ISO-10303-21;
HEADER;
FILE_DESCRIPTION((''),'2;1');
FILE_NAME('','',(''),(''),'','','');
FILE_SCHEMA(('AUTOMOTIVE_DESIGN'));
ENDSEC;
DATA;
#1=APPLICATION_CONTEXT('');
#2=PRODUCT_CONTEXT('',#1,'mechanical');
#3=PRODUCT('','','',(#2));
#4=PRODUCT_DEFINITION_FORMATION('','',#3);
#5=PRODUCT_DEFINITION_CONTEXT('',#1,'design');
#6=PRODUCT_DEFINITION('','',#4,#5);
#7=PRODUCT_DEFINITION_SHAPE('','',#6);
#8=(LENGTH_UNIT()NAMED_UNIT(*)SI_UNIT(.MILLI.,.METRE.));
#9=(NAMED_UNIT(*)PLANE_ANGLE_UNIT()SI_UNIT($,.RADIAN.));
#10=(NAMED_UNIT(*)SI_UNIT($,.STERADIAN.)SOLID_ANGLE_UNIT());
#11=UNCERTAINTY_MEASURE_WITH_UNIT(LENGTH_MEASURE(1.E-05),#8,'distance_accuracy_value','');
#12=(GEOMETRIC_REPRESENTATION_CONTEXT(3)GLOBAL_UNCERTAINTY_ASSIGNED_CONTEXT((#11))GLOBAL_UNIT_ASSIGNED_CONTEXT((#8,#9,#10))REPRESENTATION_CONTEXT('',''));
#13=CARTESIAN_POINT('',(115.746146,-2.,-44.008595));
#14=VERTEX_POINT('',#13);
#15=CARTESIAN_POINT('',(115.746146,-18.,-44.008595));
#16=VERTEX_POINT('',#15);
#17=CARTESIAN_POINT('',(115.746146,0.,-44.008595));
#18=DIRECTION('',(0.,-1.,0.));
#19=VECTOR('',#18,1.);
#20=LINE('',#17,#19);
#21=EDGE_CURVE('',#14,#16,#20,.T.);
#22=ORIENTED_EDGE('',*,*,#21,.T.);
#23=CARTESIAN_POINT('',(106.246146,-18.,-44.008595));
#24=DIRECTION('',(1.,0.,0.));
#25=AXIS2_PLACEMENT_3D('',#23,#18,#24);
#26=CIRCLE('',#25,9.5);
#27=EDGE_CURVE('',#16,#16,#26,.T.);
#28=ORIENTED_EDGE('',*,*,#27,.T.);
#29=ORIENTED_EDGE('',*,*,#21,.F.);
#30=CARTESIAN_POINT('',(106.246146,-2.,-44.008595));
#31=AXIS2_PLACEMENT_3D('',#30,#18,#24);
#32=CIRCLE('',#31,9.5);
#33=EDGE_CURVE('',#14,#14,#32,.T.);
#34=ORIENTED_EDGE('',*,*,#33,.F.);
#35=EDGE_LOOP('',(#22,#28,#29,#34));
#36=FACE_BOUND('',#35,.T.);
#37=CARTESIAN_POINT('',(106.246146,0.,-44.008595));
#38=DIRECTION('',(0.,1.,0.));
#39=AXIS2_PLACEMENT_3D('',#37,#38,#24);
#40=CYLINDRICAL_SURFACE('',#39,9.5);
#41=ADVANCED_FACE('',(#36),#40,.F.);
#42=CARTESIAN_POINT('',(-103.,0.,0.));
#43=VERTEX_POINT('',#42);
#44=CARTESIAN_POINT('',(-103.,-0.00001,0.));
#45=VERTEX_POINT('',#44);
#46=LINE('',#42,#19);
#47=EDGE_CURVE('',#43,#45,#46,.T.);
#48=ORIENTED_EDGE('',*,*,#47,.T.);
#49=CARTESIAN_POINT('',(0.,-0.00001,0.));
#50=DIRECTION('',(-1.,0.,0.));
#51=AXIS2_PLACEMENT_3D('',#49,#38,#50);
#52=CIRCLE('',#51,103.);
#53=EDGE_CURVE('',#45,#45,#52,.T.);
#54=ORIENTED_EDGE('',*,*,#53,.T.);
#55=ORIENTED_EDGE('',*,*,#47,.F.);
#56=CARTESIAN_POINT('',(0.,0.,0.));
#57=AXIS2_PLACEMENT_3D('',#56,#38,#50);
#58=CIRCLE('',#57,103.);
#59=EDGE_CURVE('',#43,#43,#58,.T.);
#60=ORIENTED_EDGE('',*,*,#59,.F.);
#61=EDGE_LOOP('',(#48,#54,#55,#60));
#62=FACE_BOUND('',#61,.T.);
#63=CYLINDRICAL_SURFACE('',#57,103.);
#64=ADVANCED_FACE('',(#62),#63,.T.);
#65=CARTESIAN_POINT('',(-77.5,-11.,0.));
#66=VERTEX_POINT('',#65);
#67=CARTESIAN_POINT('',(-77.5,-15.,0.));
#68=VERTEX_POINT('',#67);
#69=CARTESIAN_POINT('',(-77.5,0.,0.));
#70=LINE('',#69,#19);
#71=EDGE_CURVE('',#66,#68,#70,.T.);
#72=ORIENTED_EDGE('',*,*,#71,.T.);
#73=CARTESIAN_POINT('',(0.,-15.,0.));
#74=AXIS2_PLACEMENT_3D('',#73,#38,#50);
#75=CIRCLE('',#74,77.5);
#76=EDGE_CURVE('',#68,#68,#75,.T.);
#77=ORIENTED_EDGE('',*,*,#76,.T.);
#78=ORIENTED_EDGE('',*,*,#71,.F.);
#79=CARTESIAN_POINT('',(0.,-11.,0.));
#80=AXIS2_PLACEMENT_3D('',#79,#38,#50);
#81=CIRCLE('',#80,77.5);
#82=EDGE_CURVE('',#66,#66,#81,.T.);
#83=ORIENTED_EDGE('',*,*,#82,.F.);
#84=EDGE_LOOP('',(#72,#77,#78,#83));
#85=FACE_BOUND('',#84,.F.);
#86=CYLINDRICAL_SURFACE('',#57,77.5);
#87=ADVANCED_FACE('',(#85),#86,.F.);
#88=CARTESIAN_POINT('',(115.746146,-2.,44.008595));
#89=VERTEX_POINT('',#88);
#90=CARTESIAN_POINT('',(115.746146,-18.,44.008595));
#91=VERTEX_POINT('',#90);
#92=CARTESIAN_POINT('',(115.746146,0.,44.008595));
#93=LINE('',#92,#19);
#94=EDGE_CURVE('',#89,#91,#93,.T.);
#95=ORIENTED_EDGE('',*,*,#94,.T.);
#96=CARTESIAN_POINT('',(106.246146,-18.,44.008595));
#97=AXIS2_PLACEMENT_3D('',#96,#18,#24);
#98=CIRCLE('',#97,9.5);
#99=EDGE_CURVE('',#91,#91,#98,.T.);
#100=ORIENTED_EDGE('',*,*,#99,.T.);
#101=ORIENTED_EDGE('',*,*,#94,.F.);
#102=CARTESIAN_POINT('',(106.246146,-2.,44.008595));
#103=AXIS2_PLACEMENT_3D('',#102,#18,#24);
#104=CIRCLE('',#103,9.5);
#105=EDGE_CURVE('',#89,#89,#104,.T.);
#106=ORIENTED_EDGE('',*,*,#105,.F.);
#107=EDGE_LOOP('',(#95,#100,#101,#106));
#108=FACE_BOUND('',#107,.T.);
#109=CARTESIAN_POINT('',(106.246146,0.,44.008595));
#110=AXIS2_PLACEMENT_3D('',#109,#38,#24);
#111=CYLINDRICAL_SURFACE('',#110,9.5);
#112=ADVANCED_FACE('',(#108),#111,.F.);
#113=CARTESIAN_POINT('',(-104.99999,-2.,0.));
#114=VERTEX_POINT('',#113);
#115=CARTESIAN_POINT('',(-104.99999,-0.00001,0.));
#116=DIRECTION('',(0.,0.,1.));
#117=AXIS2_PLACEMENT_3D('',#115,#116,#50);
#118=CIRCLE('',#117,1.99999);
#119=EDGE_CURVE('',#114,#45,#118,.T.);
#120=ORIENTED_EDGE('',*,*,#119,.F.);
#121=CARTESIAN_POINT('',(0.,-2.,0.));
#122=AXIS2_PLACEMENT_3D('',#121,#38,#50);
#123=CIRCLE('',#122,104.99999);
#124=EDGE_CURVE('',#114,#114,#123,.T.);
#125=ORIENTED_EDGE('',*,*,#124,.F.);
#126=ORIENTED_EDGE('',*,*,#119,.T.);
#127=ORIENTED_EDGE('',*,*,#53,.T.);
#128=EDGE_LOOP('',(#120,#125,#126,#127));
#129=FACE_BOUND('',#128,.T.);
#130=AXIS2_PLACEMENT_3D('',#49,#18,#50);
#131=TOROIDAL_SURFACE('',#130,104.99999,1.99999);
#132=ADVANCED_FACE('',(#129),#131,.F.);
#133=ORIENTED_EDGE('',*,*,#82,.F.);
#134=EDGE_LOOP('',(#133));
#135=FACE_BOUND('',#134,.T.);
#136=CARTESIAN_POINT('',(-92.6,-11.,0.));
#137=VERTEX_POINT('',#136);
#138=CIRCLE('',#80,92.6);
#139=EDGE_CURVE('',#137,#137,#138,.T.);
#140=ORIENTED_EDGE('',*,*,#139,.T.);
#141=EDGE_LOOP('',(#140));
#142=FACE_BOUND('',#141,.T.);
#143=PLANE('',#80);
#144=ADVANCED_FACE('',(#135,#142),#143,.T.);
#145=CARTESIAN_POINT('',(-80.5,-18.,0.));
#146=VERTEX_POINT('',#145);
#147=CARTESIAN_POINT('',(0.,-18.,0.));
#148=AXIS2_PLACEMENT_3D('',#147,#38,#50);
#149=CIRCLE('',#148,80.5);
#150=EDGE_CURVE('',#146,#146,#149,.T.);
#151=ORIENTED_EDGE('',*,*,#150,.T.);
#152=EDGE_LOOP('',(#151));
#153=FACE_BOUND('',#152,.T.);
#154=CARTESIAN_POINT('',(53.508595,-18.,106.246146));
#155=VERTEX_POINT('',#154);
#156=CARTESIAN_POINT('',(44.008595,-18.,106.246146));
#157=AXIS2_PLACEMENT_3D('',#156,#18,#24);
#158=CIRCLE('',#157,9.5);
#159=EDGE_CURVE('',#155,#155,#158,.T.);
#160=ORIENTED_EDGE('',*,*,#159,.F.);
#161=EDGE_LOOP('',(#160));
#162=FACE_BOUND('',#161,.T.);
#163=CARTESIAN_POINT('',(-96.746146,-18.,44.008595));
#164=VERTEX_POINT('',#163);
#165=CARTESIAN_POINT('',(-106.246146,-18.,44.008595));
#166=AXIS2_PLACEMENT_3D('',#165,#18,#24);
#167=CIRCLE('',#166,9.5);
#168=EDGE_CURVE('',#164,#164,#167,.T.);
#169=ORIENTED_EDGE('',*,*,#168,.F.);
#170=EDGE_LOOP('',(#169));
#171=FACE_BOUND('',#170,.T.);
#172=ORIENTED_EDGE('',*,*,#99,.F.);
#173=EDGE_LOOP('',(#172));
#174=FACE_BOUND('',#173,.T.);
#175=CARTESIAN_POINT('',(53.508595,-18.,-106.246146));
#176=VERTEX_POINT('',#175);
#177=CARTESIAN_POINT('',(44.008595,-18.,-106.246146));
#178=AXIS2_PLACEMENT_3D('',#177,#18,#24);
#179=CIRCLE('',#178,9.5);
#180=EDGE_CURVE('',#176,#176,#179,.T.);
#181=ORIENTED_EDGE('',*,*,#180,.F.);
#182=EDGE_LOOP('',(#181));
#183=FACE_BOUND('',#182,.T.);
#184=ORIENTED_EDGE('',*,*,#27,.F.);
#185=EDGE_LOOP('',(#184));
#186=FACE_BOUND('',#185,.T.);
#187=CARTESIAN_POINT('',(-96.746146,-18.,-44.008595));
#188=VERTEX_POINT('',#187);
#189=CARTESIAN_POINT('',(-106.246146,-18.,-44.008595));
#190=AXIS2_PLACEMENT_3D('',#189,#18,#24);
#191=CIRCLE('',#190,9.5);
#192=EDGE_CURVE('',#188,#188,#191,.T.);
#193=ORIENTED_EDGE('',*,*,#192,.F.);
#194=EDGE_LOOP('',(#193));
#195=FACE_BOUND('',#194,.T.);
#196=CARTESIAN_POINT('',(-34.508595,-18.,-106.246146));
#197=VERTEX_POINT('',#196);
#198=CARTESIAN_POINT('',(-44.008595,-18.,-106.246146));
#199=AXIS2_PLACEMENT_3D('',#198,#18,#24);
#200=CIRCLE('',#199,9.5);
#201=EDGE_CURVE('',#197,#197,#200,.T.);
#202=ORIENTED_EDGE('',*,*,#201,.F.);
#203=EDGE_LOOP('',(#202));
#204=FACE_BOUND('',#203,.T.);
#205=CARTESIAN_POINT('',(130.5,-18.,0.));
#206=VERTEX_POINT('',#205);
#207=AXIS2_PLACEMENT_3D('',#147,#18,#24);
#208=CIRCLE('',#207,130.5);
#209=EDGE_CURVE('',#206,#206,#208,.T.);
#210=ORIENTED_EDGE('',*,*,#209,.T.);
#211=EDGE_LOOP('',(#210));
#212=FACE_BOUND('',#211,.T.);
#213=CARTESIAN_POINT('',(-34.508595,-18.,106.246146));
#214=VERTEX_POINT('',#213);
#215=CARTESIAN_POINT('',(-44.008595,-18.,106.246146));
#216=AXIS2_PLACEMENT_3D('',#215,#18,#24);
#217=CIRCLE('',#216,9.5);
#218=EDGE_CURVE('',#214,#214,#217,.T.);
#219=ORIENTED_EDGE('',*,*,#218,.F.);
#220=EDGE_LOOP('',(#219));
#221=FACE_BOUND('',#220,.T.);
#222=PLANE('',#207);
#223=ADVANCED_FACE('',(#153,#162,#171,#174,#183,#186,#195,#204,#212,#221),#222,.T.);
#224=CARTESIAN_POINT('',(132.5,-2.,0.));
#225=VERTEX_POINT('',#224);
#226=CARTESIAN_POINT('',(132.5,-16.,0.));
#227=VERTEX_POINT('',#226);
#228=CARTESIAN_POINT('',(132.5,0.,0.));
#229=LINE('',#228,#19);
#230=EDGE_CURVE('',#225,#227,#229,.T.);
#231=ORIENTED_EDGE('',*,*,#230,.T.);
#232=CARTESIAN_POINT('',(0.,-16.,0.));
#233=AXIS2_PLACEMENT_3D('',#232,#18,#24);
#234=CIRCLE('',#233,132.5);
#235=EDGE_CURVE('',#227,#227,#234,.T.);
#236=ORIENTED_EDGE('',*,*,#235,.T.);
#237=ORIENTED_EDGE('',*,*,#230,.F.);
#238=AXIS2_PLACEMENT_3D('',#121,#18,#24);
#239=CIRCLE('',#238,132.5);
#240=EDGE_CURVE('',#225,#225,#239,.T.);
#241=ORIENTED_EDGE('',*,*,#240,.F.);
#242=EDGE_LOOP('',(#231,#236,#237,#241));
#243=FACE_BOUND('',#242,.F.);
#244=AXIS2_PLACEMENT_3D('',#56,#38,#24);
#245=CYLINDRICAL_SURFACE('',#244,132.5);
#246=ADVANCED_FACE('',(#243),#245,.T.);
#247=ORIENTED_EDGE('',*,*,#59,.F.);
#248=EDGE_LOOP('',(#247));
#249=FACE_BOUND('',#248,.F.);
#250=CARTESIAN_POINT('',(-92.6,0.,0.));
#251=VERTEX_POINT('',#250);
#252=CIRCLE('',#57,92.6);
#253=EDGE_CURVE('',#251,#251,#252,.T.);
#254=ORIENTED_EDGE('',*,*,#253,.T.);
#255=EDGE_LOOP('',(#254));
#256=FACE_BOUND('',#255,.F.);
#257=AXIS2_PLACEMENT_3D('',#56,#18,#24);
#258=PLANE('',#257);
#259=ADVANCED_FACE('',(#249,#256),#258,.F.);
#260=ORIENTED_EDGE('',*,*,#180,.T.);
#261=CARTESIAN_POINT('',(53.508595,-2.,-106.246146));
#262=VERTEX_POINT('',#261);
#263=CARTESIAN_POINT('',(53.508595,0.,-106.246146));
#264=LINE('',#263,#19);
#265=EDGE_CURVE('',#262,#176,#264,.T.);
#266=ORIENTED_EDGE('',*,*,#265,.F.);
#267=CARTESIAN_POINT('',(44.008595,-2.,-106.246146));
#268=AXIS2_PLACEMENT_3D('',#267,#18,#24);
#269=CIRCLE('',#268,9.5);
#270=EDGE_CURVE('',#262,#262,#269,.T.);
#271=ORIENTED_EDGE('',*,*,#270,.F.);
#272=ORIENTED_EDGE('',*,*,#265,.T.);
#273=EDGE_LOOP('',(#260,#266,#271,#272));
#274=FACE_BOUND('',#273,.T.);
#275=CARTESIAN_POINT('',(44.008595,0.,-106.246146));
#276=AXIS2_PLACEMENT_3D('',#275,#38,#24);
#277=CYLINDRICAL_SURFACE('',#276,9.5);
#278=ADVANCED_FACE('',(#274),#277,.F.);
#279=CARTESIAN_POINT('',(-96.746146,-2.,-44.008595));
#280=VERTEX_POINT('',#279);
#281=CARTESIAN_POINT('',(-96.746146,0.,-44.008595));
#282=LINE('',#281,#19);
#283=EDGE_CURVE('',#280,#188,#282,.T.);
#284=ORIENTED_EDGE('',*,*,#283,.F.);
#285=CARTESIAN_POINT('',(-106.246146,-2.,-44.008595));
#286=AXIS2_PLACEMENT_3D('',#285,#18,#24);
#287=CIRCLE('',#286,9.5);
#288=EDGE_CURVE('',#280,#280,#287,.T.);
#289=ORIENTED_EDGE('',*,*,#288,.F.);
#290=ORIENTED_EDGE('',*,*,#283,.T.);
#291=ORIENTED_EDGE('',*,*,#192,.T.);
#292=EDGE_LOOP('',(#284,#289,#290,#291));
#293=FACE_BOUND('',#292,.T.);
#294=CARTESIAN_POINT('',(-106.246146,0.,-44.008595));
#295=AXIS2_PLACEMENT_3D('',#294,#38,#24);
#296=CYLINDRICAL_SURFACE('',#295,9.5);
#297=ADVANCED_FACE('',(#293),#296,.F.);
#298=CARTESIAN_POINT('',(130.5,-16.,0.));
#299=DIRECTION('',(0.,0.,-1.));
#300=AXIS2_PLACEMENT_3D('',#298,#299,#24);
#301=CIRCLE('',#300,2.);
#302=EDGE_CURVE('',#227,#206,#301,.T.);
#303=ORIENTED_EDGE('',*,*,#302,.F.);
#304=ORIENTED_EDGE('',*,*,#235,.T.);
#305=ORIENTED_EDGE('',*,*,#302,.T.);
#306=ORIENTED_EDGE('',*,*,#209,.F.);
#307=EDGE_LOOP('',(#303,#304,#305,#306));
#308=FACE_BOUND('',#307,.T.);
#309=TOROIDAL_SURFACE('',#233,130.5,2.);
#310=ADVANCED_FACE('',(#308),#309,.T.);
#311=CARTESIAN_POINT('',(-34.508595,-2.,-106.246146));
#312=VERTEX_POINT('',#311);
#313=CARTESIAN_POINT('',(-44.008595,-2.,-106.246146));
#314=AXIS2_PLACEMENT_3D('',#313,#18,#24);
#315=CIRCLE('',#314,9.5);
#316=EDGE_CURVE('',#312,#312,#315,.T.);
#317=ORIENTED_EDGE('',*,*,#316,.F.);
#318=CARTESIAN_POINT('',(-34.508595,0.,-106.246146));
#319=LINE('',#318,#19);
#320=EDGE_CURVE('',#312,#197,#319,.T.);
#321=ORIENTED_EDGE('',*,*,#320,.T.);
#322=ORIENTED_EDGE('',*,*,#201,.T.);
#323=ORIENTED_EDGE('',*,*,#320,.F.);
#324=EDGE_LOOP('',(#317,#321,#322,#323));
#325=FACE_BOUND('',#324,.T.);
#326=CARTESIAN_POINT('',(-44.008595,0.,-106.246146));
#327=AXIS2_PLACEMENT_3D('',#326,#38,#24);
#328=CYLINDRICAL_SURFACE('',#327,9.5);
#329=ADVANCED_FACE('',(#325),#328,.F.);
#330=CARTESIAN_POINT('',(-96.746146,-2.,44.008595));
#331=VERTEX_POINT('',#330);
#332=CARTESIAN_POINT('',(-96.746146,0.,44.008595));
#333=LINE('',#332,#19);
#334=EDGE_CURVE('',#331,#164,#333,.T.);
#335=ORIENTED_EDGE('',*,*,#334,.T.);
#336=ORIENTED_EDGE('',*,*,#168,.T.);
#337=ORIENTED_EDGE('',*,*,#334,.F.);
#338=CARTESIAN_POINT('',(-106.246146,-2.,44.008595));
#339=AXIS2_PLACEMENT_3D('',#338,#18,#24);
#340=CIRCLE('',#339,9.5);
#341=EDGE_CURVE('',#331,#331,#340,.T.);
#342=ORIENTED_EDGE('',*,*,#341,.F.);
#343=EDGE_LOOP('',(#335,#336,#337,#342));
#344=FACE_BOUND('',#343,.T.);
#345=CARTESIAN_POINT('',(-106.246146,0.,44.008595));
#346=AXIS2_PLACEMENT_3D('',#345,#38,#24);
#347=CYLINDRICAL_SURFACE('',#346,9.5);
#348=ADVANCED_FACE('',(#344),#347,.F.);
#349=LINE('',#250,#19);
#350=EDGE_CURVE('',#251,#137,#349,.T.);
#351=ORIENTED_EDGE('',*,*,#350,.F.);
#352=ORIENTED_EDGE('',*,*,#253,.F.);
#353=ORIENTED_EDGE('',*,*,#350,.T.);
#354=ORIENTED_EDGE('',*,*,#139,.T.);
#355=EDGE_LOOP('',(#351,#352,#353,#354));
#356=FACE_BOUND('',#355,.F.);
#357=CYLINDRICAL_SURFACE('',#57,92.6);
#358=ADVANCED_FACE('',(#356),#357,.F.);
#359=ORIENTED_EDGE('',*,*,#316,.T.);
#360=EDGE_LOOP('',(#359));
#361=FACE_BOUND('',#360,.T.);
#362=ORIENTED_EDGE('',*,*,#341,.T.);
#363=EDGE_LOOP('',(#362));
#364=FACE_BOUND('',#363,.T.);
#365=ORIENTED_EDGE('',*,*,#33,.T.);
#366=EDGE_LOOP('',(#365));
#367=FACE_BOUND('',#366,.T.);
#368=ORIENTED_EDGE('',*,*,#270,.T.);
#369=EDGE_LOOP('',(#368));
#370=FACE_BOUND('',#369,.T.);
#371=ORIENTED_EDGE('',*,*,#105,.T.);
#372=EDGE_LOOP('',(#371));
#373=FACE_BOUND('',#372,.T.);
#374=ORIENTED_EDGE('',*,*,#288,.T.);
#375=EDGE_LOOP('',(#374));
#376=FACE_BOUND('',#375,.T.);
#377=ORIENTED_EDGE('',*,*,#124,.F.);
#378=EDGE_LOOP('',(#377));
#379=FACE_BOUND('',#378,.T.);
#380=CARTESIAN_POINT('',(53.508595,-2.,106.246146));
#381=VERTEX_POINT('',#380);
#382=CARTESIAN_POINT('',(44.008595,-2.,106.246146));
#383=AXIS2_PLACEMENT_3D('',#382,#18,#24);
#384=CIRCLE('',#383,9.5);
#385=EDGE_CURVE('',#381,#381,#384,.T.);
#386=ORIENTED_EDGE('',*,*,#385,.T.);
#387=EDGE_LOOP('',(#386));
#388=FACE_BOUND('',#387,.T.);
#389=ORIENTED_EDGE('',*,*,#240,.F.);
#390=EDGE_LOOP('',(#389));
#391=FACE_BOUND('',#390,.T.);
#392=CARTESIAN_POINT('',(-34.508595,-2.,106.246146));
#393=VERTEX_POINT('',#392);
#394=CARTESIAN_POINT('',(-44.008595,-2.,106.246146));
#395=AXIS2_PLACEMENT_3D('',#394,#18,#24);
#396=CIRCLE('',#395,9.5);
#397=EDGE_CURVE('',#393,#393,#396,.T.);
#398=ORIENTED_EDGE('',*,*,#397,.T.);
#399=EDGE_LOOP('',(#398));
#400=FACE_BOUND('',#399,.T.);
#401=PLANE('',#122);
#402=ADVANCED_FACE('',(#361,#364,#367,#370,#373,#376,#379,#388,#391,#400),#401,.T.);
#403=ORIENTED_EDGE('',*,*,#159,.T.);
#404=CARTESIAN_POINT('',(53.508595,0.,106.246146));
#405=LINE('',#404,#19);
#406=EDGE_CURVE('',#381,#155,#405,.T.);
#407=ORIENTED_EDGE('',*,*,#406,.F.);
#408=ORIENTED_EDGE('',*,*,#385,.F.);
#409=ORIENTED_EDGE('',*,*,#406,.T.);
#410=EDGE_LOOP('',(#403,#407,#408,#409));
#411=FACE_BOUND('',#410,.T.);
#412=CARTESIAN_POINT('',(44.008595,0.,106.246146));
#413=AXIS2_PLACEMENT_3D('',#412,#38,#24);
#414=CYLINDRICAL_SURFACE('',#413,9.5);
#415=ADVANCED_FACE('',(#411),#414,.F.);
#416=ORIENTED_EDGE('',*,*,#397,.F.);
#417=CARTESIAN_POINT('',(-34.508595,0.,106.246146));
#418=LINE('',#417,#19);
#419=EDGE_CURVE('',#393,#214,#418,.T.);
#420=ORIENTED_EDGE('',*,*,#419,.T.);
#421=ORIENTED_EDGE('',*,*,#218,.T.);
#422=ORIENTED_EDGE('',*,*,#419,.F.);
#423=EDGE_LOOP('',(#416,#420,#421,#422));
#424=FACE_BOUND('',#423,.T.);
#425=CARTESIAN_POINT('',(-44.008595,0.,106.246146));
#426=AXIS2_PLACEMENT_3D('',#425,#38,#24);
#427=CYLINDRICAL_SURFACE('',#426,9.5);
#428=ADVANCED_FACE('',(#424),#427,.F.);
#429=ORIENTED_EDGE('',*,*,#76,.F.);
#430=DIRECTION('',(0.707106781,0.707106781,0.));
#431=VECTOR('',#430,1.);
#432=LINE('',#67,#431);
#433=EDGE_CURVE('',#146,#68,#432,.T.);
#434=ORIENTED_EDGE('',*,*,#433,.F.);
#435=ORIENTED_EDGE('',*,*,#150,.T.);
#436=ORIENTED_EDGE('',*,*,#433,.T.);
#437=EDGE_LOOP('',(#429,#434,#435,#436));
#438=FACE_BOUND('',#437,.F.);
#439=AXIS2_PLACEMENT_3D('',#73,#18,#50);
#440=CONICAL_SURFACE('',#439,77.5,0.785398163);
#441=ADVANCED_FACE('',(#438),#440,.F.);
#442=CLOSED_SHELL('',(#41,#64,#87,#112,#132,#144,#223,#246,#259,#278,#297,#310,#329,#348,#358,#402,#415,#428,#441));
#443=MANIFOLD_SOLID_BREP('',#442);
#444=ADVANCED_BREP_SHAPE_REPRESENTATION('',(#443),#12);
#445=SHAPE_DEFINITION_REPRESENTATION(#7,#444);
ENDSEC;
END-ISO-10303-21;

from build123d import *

# Parameters (mm, degrees)
F0_R     = 132.5
F0_R_2   = 9.5
F1_DEPTH = 18
F2_R     = 2
F3_R     = 132.5
F3_R_2   = 9.5
F3_R_3   = 103
F4_DEPTH = 2
F5_R     = 1.99999
F6_R     = 77.5
F7_DEPTH = 18.001
F6_R_2   = 92.6
F8_DEPTH = 11
F9_SIZE  = 3


# Not quite as in the source:
# - a fillet or chamfer is up to 0.001 mm smaller than in the source, because OpenCascade refuses the exact size


with BuildPart() as f1:
    # F0 (on Front) → F1 (new body)
    with BuildSketch(Plane.XZ):
        Circle(F0_R)
        with Locations((-44.008594722, -106.2461462388)):
            Circle(F0_R_2, mode=Mode.SUBTRACT)
        with Locations((-106.2461462388, -44.008594722)):
            Circle(F0_R_2, mode=Mode.SUBTRACT)
        with Locations((44.008594722, -106.2461462388)):
            Circle(F0_R_2, mode=Mode.SUBTRACT)
        with Locations((106.2461462388, -44.008594722)):
            Circle(F0_R_2, mode=Mode.SUBTRACT)
        with Locations((-106.2461462388, 44.008594722)):
            Circle(F0_R_2, mode=Mode.SUBTRACT)
        with Locations((-44.008594722, 106.2461462388)):
            Circle(F0_R_2, mode=Mode.SUBTRACT)
        with Locations((106.2461462388, 44.008594722)):
            Circle(F0_R_2, mode=Mode.SUBTRACT)
        with Locations((44.008594722, 106.2461462388)):
            Circle(F0_R_2, mode=Mode.SUBTRACT)
    extrude(amount=F1_DEPTH)

    # F2
    f2_edges = [f1.edges().sort_by_distance(p)[0] for p in [
        (-132.5, -18, 0),
    ]]
    fillet(f2_edges, radius=F2_R)

    # F3 (on face) → F4 (cut)
    with BuildSketch(Plane(origin=(0, 0, 0), x_dir=(-1, 0, 0), z_dir=(0, 1, 0))):
        Circle(F3_R)
        with Locations((-44.008594722, -106.2461462388)):
            Circle(F3_R_2, mode=Mode.SUBTRACT)
        with Locations((-106.2461462388, -44.008594722)):
            Circle(F3_R_2, mode=Mode.SUBTRACT)
        with Locations((44.008594722, -106.2461462388)):
            Circle(F3_R_2, mode=Mode.SUBTRACT)
        with Locations((106.2461462388, -44.008594722)):
            Circle(F3_R_2, mode=Mode.SUBTRACT)
        with Locations((-106.2461462388, 44.008594722)):
            Circle(F3_R_2, mode=Mode.SUBTRACT)
        with Locations((-44.008594722, 106.2461462388)):
            Circle(F3_R_2, mode=Mode.SUBTRACT)
        Circle(F3_R_3, mode=Mode.SUBTRACT)
        with Locations((106.2461462388, 44.008594722)):
            Circle(F3_R_2, mode=Mode.SUBTRACT)
        with Locations((44.008594722, 106.2461462388)):
            Circle(F3_R_2, mode=Mode.SUBTRACT)
    extrude(amount=-F4_DEPTH, mode=Mode.SUBTRACT)

    # F5 (radius 2 in the source; OpenCascade refuses exactly that, so slightly less here)
    f5_edges = [f1.edges().sort_by_distance(p)[0] for p in [
        (103, -2, 0),
    ]]
    fillet(f5_edges, radius=F5_R)

    # F6 (on face) → F7 (cut, through all)
    with BuildSketch(Plane(origin=(0, 0, 0), x_dir=(-1, 0, 0), z_dir=(0, 1, 0))):
        Circle(F6_R)
    extrude(amount=-F7_DEPTH, mode=Mode.SUBTRACT)

    # F6 (on face) → F8 (cut)
    with BuildSketch(Plane(origin=(0, 0, 0), x_dir=(-1, 0, 0), z_dir=(0, 1, 0))):
        Circle(F6_R_2)
        Circle(F6_R, mode=Mode.SUBTRACT)
    extrude(amount=-F8_DEPTH, mode=Mode.SUBTRACT)

    # F9
    f9_edges = [f1.edges().sort_by_distance(p)[0] for p in [
        (77.5, -18, 0),
    ]]
    chamfer(f9_edges, length=F9_SIZE)


solid = f1.part
